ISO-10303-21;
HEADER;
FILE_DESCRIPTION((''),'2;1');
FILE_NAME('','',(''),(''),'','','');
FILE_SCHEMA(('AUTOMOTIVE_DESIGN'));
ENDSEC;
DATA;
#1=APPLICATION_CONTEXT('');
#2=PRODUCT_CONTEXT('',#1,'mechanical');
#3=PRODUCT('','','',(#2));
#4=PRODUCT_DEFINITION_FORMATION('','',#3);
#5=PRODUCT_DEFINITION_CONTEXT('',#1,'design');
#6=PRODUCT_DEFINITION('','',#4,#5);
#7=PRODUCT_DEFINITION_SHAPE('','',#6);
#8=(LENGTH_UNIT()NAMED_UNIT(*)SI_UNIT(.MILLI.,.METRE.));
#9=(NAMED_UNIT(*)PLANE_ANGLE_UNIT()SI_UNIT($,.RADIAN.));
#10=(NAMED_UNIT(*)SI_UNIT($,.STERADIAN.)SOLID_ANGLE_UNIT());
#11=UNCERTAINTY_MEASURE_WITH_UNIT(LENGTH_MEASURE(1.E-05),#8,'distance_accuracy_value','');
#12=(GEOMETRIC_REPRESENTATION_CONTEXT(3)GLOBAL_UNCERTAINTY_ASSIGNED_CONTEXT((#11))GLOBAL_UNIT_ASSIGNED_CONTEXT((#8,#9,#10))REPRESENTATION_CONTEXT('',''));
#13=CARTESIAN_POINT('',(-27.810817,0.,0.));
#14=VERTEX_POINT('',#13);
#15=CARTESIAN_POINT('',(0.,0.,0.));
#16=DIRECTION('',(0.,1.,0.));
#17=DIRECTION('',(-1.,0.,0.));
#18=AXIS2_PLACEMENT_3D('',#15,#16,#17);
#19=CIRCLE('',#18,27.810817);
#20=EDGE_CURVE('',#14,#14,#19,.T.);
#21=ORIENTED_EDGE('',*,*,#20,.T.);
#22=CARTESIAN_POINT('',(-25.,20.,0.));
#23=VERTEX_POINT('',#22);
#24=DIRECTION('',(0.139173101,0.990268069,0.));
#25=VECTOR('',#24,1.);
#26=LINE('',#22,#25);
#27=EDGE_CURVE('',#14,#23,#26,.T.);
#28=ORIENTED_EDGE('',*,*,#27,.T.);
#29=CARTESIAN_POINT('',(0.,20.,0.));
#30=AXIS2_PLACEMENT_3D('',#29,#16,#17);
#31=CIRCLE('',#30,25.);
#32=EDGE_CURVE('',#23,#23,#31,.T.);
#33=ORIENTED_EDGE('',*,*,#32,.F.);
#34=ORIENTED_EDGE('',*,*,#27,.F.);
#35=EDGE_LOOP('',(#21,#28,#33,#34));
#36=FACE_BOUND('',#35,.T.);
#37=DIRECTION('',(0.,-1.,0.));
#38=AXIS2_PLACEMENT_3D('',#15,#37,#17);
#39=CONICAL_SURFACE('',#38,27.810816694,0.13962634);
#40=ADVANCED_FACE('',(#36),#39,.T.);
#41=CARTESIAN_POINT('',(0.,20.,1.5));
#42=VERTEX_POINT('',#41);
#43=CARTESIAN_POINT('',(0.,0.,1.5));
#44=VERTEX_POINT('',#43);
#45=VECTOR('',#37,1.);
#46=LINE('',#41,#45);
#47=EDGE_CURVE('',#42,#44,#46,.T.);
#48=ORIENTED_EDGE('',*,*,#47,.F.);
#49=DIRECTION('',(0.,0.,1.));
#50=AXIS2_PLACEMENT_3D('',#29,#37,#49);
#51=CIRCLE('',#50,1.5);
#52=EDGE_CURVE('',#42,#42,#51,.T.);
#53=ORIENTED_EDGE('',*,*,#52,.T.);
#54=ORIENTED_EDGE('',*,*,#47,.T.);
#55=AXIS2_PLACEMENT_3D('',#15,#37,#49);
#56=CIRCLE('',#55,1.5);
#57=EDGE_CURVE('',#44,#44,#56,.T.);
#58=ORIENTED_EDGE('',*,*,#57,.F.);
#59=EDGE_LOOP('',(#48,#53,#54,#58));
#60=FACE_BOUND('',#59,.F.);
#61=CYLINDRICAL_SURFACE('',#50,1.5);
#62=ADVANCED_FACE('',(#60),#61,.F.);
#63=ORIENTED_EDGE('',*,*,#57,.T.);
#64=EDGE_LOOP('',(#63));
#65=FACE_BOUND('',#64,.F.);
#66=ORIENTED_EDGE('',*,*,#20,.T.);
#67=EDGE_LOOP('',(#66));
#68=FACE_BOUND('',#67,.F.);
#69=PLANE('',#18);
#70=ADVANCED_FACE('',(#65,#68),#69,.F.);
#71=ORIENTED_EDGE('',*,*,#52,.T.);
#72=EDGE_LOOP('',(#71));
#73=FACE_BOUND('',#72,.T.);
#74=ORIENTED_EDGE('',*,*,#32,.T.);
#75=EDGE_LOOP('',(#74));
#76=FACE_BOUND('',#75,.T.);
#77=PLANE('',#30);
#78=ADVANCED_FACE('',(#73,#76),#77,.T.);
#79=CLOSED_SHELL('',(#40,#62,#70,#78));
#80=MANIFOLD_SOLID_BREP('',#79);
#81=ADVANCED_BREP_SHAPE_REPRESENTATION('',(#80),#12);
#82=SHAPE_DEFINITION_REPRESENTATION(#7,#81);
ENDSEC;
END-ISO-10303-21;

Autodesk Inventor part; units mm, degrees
ref_plane "YZ Plane" through (0, 0, 0) normal (1, 0, 0) x (0, 1, 0)
ref_plane "XZ Plane" through (0, 0, 0) normal (0, 1, 0) x (-1, 0, 0)
ref_plane "XY Plane" through (0, 0, 0) normal (0, 0, 1) x (1, 0, 0)
sketch "Sketch1" plane through (0, 0, 0) normal (0, 1, 0) x (-1, 0, 0)
  circle A0 centre (0, 0) radius 25
  dimension "d0" = 50
extrude "Extrusion1" add sketch "Sketch1" along normal blind 20
draft "FaceDraft1" angle 8 pull direction (0, 1, 0) faces at (-24.9189, 13.3333, -2.0117) fixed edges at (25, 20, 0)
sketch "Sketch2" plane through (0, 20, 0) normal (0, 1, 0) x (1, 0, 0)
  point P0 (0, 0)
  point P1 (0, 0)
hole "Hole1" at (0, 20, 0) direction (0, -1, 0) diameter 3 end through all
properties part number "shoulder_base"
